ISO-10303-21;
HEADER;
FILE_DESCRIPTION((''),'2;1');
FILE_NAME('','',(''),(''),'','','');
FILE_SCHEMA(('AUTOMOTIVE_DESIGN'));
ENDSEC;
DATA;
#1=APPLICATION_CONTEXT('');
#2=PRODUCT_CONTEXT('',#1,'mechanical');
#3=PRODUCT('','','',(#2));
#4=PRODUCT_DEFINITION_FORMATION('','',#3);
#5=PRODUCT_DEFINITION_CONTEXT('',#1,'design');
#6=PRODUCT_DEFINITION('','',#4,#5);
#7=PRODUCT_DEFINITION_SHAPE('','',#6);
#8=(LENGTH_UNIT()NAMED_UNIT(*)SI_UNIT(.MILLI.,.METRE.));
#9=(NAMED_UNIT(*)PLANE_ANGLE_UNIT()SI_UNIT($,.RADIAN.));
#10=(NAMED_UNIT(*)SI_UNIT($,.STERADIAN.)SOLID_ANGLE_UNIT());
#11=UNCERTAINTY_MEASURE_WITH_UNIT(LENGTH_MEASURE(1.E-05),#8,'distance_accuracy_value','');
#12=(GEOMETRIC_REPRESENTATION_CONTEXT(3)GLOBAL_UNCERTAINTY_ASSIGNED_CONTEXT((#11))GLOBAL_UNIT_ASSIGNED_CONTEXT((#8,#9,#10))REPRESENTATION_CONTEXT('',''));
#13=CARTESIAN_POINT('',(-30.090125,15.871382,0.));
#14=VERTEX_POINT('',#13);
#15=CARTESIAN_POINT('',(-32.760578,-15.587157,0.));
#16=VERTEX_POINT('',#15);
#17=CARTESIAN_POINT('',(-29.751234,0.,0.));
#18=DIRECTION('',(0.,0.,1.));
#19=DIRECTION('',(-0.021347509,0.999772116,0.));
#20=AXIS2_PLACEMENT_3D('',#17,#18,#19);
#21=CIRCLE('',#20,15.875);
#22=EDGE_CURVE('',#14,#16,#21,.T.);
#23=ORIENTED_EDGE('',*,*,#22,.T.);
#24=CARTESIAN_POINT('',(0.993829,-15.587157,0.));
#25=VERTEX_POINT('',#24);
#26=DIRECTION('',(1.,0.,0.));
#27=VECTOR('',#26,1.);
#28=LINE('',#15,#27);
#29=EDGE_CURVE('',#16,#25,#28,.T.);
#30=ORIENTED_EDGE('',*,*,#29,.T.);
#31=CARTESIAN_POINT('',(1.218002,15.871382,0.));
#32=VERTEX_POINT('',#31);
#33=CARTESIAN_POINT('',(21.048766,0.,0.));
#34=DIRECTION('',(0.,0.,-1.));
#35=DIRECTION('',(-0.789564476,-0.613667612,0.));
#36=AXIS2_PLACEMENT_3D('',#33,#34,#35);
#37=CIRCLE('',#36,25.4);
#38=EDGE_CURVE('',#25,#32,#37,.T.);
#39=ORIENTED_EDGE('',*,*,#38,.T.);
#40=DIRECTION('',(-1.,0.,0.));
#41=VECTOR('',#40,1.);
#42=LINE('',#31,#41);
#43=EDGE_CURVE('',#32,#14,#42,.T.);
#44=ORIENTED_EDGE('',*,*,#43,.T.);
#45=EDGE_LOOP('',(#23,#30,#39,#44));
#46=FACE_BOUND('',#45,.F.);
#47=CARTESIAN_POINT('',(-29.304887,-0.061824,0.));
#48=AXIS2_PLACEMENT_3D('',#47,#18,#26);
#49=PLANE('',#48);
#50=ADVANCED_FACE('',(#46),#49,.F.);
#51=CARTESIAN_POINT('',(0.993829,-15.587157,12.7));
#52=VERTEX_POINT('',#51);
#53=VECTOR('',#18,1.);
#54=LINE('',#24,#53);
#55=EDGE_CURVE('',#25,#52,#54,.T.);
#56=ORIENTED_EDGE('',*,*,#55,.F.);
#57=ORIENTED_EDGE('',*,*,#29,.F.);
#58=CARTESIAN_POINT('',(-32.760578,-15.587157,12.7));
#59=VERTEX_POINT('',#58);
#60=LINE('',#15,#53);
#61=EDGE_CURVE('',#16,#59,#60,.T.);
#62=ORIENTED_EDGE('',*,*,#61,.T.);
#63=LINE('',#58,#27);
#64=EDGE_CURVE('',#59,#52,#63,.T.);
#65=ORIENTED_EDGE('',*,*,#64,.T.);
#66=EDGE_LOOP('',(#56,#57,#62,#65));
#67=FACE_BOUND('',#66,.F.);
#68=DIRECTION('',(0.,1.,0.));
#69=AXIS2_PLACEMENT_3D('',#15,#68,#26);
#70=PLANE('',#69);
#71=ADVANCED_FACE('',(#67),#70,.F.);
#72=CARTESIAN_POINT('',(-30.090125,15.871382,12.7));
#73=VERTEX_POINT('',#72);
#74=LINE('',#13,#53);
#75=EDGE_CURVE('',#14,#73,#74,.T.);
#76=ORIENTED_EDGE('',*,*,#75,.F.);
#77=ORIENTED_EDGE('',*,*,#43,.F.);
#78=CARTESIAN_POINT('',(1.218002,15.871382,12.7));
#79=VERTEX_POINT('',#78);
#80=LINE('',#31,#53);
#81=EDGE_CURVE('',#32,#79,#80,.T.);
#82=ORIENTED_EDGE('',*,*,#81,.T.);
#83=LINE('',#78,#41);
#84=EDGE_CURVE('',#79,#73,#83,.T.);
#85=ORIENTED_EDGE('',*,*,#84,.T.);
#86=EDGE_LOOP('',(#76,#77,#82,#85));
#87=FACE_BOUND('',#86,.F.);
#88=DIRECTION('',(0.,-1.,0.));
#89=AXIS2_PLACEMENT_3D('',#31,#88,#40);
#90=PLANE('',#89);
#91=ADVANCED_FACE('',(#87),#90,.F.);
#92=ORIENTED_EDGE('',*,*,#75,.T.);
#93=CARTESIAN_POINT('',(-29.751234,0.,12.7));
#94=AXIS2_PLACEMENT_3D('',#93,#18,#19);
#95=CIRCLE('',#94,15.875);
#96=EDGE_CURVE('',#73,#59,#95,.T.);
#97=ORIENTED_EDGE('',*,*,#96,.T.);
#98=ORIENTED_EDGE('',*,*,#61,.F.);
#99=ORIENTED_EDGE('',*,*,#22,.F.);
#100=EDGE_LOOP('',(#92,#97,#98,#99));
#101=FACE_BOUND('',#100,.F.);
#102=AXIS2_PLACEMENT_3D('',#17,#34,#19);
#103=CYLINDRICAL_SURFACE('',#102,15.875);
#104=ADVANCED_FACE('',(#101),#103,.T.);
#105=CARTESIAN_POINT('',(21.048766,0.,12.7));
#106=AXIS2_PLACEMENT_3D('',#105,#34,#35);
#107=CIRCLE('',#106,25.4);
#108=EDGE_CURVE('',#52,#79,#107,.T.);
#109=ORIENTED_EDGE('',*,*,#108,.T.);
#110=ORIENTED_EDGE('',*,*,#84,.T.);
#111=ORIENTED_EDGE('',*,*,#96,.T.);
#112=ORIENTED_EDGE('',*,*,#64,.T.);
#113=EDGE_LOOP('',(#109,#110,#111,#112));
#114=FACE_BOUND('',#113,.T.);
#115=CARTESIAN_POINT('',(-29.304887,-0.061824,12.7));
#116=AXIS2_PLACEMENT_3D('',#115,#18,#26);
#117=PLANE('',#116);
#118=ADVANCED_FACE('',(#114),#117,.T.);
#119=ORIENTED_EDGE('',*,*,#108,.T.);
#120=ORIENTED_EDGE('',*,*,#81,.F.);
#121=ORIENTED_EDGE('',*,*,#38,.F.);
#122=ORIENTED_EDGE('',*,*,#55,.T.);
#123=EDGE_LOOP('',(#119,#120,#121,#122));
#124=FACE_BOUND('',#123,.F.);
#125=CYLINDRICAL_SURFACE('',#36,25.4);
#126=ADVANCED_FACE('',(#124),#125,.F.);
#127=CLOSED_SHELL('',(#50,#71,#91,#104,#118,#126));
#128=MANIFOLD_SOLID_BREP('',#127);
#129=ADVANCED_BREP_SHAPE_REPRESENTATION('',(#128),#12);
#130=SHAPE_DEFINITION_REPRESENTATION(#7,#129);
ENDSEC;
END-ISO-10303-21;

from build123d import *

# Parameters (mm, degrees)
F1_DEPTH = 12.7


# Not quite as in the source:
# - a feature of the source that left no trace in its solid (it failed there, or was rolled back) is left out


with BuildPart() as f1:
    # F0 (on Top) → F1 (new body)
    with BuildSketch(Plane.XY):
        with BuildLine():
            Line((-29.4123420513, 15.8713823409), (-30.0901254618, 15.8713823409))
            ThreePointArc((-30.0901254618, 15.8713823409), (-45.5693436369, 1.3427675948), (-32.7605777455, -15.587157334))
            Line((-32.7605777455, -15.587157334), (-26.7418897676, -15.587157334))
            ThreePointArc((-26.7418897676, -15.587157334), (-17.5080936196, -10.1055007094), (-13.8762337565, 0))
            ThreePointArc((-13.8762337565, 0), (-18.4067300032, 11.1048574772), (-29.4123420513, 15.8713823409))
        make_face()
        with BuildLine():
            Line((1.2180016947, 15.8713823409), (-29.4123420513, 15.8713823409))
            ThreePointArc((-29.4123420513, 15.8713823409), (-18.4067300032, 11.1048574772), (-13.8762337565, 0))
            ThreePointArc((-13.8762337565, 0), (-17.5080936196, -10.1055007094), (-26.7418897676, -15.587157334))
            Line((-26.7418897676, -15.587157334), (0.9938285411, -15.587157334))
            ThreePointArc((0.9938285411, -15.587157334), (-4.350588879, 0.1809954815), (1.2180016947, 15.8713823409))
        make_face()
    extrude(amount=F1_DEPTH)


solid = f1.part
